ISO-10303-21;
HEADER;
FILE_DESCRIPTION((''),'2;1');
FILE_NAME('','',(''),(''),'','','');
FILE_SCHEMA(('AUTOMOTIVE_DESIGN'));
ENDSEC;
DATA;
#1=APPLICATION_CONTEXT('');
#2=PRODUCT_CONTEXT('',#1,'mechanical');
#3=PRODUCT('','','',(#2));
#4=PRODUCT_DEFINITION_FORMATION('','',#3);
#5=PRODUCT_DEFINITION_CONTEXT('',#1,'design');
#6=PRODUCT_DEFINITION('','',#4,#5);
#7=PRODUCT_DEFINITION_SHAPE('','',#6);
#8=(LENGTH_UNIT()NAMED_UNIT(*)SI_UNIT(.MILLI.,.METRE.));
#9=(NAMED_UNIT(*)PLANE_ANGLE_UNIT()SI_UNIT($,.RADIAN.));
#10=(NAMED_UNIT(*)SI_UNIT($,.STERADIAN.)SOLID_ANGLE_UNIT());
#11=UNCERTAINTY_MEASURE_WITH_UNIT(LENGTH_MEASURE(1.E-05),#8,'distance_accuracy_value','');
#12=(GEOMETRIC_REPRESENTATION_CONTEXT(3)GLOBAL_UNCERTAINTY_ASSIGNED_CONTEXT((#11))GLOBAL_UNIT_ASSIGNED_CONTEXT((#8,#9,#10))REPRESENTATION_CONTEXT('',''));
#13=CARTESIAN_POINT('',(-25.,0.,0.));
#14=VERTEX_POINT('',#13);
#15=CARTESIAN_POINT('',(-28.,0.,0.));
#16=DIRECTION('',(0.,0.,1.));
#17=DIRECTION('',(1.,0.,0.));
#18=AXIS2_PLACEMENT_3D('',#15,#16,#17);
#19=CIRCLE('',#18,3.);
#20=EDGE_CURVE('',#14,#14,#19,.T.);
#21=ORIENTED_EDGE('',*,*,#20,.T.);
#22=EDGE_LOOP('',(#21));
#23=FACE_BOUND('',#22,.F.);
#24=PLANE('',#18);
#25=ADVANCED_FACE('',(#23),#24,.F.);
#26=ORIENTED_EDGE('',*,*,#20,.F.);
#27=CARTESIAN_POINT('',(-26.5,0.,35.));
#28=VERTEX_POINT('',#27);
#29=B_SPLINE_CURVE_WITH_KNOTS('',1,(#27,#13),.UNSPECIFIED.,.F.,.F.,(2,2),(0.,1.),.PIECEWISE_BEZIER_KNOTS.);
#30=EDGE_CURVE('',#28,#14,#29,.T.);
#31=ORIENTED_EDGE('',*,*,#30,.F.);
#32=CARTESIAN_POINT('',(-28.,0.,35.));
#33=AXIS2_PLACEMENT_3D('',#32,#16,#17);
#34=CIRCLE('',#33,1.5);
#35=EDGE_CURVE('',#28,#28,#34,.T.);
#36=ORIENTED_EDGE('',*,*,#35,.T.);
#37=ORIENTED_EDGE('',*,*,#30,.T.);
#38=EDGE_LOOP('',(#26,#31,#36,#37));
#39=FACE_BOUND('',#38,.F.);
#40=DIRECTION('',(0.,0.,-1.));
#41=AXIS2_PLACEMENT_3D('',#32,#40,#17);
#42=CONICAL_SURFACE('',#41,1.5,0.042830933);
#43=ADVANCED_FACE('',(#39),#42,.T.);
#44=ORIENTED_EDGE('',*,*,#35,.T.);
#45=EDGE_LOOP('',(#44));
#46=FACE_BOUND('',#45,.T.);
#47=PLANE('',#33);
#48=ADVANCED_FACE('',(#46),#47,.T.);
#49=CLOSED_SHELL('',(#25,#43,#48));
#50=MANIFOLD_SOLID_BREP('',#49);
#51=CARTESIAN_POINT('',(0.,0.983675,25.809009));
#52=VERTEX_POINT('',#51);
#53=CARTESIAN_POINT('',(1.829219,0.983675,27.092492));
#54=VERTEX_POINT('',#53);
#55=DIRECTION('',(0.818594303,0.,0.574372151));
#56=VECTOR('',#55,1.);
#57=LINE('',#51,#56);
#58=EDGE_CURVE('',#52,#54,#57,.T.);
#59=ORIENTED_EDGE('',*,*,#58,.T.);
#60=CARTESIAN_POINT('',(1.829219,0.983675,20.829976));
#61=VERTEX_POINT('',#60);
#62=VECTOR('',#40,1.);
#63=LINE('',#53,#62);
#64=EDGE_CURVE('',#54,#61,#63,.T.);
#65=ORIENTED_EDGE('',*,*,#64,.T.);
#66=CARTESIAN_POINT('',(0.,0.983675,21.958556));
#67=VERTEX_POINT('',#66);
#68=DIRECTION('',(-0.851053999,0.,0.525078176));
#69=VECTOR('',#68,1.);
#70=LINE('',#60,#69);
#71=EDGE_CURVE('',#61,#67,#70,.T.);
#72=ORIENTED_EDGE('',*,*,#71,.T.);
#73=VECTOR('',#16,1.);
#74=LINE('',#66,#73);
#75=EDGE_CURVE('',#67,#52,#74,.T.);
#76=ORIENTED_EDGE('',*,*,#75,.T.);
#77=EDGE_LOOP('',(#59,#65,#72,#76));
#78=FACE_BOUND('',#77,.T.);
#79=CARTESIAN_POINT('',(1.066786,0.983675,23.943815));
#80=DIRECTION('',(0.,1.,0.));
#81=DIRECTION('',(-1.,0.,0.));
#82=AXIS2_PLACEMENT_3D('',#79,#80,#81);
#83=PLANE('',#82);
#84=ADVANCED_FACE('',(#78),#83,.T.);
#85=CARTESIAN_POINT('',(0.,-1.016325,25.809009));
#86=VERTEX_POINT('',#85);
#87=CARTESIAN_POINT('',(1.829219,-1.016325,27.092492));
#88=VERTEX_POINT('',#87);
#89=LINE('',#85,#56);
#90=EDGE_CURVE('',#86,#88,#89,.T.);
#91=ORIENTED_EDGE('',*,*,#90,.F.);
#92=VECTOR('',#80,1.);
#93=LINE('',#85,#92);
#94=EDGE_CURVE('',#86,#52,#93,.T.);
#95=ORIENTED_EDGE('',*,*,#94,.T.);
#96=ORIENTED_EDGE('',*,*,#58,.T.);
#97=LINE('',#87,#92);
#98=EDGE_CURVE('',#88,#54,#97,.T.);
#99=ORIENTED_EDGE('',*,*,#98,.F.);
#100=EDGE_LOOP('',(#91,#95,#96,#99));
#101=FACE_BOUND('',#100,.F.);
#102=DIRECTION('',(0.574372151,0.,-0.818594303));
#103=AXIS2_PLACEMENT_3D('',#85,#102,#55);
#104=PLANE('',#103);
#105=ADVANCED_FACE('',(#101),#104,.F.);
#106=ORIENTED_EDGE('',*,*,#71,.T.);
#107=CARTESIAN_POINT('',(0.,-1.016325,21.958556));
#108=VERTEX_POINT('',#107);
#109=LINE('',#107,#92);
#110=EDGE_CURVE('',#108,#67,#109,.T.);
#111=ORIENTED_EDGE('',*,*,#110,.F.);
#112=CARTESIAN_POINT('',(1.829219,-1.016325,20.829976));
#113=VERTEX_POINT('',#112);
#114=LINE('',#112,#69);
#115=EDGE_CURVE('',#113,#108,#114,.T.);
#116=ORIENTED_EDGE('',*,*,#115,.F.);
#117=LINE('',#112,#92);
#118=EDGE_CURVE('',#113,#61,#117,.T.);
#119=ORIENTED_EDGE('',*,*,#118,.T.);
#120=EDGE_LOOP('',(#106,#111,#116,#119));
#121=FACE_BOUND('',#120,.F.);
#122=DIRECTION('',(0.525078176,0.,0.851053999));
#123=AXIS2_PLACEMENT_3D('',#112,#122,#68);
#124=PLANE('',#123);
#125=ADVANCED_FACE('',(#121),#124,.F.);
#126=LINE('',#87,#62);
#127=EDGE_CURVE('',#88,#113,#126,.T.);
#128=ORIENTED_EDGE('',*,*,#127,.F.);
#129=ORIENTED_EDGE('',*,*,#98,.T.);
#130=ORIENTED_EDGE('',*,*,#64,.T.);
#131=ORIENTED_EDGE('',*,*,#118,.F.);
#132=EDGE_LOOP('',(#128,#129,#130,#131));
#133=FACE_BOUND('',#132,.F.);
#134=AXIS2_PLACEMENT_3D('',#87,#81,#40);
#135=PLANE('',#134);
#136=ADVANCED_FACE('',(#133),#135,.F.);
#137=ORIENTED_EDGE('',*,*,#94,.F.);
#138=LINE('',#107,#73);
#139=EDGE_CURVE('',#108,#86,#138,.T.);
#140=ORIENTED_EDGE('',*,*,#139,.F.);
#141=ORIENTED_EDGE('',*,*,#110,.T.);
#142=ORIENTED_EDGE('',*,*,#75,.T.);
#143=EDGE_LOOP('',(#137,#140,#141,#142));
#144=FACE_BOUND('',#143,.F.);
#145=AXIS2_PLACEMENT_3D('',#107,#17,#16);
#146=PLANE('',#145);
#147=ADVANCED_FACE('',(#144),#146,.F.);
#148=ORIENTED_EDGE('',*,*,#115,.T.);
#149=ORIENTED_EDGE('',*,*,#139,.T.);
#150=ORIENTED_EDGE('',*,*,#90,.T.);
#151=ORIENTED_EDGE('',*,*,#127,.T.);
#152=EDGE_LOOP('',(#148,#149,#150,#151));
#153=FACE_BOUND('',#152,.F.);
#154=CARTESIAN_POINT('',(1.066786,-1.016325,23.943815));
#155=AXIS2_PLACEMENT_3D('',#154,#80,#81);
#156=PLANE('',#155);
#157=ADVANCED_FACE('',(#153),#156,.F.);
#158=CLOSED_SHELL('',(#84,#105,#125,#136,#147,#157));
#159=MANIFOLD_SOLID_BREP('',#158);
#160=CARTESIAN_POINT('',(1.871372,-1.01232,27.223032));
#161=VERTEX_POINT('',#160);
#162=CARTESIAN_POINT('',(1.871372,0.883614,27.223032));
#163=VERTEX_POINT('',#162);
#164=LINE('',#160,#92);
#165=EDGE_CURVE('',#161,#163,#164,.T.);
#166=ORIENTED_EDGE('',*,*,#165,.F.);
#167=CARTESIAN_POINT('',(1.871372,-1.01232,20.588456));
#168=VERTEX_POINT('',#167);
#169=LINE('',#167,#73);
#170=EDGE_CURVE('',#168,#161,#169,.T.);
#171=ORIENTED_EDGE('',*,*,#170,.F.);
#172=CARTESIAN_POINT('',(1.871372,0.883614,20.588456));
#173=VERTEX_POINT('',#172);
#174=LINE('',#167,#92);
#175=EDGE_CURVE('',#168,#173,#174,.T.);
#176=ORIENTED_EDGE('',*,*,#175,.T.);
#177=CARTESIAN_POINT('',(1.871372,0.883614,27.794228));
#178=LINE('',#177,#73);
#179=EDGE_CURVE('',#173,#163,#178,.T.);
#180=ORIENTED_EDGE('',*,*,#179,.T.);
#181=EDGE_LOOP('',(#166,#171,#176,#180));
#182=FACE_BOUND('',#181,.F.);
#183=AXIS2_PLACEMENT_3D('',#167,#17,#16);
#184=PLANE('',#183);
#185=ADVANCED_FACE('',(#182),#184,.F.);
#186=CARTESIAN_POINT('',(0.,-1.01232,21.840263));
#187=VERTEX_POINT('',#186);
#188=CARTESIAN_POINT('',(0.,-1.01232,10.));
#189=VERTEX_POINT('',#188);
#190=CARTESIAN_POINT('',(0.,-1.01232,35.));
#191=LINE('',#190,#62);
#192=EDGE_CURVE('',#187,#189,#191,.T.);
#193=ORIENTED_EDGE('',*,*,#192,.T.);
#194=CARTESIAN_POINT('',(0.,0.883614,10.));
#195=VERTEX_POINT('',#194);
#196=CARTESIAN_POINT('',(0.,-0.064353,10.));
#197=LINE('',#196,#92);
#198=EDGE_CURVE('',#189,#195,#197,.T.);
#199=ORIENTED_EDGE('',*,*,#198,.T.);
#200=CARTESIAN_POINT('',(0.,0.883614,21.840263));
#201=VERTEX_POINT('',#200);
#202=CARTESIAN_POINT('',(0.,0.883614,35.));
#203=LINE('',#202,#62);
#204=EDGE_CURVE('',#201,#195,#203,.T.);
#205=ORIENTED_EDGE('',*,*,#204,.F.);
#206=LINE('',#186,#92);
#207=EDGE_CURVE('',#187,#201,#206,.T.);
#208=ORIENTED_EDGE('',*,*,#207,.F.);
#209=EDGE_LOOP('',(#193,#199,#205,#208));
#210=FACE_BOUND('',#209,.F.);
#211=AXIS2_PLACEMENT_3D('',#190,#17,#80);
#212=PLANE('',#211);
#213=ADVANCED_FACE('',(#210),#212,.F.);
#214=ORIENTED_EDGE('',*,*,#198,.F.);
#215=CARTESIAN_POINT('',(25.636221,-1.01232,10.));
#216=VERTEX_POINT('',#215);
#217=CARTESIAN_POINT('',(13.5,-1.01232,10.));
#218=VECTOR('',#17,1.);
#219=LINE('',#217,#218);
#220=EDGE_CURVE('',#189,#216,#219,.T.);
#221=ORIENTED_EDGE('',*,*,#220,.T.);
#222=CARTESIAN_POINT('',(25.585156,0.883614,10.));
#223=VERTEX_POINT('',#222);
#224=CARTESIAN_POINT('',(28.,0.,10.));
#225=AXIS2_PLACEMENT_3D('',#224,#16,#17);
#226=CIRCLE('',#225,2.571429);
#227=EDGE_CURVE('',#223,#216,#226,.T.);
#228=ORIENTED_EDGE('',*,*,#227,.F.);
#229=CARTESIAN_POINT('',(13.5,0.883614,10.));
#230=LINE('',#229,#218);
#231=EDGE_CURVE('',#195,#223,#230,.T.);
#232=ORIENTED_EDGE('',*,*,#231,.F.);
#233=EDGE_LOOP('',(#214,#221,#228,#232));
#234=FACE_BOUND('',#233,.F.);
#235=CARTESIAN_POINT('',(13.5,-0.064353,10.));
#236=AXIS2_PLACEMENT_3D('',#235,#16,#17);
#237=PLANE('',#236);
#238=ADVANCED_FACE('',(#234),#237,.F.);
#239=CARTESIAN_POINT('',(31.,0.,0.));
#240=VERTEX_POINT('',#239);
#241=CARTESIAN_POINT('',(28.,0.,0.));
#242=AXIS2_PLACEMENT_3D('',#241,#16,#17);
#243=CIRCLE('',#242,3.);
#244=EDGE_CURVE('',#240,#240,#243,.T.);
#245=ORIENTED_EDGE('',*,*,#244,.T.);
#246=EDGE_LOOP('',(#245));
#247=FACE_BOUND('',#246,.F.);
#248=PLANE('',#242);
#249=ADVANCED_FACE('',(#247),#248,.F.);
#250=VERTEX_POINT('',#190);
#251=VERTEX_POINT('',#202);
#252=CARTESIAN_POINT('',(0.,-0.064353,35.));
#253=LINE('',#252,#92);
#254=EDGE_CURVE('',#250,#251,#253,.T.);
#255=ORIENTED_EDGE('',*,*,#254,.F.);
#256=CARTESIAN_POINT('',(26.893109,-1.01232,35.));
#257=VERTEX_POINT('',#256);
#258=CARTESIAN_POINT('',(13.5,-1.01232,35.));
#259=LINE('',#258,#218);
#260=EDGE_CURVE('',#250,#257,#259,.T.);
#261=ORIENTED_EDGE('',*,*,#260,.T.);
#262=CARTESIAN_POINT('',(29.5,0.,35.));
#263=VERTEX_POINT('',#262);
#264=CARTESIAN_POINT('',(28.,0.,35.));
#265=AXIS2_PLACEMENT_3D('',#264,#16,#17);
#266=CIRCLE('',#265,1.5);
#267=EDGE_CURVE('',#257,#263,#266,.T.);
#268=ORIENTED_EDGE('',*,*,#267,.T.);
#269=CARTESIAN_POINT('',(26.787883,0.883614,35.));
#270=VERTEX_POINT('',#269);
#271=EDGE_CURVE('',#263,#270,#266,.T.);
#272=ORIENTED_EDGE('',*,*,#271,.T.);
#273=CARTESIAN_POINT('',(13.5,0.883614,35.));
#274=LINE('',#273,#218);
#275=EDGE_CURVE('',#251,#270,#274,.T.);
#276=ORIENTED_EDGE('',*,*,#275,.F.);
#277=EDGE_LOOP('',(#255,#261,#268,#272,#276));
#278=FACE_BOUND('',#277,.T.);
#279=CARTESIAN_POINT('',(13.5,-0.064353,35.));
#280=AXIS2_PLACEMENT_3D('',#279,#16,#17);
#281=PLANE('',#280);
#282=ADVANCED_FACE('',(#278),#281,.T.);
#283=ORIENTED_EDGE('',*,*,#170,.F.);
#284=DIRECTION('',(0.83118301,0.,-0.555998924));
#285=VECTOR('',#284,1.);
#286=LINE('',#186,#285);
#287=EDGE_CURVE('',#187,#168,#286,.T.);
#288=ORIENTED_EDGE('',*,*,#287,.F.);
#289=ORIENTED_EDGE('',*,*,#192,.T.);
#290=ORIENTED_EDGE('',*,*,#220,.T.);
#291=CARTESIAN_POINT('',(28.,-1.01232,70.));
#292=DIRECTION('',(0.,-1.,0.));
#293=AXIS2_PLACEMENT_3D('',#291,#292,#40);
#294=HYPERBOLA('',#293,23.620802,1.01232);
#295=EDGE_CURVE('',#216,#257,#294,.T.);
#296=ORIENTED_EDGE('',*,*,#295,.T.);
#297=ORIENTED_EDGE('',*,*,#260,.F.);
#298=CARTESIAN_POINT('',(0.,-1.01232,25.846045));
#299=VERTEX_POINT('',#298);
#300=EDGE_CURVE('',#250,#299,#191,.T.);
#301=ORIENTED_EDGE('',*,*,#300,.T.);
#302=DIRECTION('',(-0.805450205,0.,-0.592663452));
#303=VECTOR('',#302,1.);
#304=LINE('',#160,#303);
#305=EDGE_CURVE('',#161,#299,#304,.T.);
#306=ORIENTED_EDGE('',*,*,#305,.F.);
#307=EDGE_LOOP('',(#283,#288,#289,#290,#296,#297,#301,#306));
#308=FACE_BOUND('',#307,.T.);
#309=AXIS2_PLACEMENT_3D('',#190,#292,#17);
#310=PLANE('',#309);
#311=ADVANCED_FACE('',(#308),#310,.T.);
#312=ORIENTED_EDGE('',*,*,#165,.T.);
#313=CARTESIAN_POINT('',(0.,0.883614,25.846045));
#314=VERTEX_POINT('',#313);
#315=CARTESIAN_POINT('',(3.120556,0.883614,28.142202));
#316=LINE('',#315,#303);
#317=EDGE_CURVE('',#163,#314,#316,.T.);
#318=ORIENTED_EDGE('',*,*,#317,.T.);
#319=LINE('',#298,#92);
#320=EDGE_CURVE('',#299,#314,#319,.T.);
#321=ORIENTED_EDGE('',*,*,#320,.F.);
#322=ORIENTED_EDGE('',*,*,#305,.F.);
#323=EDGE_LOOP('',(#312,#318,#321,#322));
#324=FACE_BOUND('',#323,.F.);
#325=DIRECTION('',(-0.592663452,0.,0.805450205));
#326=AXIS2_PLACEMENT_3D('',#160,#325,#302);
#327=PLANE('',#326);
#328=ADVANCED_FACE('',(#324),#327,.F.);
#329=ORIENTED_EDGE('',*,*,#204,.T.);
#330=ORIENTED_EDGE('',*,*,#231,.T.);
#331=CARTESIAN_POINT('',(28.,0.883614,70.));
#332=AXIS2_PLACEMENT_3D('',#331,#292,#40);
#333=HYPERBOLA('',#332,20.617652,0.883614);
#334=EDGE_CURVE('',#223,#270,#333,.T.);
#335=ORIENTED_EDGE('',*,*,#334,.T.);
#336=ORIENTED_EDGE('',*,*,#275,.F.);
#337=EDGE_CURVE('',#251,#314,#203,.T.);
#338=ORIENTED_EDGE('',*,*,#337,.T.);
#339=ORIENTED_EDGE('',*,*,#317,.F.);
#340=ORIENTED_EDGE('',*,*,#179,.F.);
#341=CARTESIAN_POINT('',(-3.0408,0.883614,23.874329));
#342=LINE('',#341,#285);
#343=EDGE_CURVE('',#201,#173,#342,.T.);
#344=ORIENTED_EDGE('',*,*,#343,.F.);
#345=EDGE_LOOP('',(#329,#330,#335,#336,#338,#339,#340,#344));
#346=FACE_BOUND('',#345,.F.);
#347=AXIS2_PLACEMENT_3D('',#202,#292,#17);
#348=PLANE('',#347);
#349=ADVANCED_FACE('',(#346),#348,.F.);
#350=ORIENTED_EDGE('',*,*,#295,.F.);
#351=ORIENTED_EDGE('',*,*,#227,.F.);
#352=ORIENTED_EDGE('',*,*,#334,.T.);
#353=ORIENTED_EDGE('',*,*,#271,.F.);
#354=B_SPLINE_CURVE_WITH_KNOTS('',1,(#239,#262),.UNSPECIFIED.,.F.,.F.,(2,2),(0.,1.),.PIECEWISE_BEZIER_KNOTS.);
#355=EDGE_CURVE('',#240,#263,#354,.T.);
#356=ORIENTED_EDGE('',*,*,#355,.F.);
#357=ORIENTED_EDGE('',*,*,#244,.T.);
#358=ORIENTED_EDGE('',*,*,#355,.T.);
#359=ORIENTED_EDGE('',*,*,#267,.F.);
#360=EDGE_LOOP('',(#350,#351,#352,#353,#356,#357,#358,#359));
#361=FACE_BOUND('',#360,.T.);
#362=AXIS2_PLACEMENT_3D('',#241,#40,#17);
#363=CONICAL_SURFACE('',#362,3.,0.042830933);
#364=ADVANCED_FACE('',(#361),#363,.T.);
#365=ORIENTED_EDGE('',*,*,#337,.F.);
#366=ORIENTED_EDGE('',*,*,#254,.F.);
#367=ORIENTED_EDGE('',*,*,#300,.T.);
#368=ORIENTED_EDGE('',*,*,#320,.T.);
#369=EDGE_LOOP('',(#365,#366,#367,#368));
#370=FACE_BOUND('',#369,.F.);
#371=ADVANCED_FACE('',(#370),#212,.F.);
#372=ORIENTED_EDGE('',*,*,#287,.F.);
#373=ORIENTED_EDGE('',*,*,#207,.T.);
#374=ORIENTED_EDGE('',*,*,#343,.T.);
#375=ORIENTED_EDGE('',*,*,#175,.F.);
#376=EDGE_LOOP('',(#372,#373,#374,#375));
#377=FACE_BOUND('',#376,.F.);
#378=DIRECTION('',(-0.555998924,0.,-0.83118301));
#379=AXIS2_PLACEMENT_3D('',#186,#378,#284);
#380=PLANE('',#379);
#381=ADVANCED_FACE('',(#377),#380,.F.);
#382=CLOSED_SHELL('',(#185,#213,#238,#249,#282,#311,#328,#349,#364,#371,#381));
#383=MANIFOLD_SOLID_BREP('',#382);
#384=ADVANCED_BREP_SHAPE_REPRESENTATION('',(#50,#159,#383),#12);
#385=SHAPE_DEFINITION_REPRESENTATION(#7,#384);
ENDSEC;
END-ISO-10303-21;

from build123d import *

# Parameters (mm, degrees)
F0_R      = 3
F2_R      = 1.5
F4_W      = 27
F4_H      = 1.8959337356
F5_DEPTH  = 25
F7_R      = 1.5
F6_R      = 3
F13_DEPTH = 25
F15_DEPTH = 2


with BuildPart() as f3:
    # F0 (on Top) → F3 section 0
    with BuildSketch(Plane.XY):
        with Locations((28, 0)):
            Circle(F0_R)
    # F2 (on offset) → F3 section 1
    with BuildSketch(Plane.XY.offset(35)):
        with Locations((28, 0)):
            Circle(F2_R)
    loft()

    # F4 (on offset) → F5 (join)
    with BuildSketch(Plane.XY.offset(35)):
        with Locations((13.5, -0.0643532243)):
            Rectangle(F4_W, F4_H)
    extrude(amount=-F5_DEPTH)

    # F12 (on face) → F13 (cut)
    with BuildSketch(Plane.XZ.offset(1.0123200921)):
        Polygon((1.8713724567, 27.2230319679), (0, 25.8460454643), (0, 21.8402631581), (1.8713724567, 20.5884557217), align=None)
    extrude(amount=-F13_DEPTH, mode=Mode.SUBTRACT)


with BuildPart() as f8:
    # F7 (on offset) → F8 section 0
    with BuildSketch(Plane.XY.offset(35)):
        with Locations((-28, 0)):
            Circle(F7_R)
    # F6 (on Top) → F8 section 1
    with BuildSketch(Plane.XY):
        with Locations((-28, 0)):
            Circle(F6_R)
    loft()


with BuildPart() as f15:
    # F14 (on face) → F15 (new body)
    with BuildSketch(Plane(origin=(0, -1.0163254858, 0), x_dir=(-1, 0, 0), z_dir=(0, 1, 0))):
        Polygon((0, 21.9585560262), (0, 25.8090086281), (-1.8292188179, 27.0924922079), (-1.8292188179, 20.829975605), align=None)
    extrude(amount=F15_DEPTH)


solid = Compound([f3.part, f8.part, f15.part])
